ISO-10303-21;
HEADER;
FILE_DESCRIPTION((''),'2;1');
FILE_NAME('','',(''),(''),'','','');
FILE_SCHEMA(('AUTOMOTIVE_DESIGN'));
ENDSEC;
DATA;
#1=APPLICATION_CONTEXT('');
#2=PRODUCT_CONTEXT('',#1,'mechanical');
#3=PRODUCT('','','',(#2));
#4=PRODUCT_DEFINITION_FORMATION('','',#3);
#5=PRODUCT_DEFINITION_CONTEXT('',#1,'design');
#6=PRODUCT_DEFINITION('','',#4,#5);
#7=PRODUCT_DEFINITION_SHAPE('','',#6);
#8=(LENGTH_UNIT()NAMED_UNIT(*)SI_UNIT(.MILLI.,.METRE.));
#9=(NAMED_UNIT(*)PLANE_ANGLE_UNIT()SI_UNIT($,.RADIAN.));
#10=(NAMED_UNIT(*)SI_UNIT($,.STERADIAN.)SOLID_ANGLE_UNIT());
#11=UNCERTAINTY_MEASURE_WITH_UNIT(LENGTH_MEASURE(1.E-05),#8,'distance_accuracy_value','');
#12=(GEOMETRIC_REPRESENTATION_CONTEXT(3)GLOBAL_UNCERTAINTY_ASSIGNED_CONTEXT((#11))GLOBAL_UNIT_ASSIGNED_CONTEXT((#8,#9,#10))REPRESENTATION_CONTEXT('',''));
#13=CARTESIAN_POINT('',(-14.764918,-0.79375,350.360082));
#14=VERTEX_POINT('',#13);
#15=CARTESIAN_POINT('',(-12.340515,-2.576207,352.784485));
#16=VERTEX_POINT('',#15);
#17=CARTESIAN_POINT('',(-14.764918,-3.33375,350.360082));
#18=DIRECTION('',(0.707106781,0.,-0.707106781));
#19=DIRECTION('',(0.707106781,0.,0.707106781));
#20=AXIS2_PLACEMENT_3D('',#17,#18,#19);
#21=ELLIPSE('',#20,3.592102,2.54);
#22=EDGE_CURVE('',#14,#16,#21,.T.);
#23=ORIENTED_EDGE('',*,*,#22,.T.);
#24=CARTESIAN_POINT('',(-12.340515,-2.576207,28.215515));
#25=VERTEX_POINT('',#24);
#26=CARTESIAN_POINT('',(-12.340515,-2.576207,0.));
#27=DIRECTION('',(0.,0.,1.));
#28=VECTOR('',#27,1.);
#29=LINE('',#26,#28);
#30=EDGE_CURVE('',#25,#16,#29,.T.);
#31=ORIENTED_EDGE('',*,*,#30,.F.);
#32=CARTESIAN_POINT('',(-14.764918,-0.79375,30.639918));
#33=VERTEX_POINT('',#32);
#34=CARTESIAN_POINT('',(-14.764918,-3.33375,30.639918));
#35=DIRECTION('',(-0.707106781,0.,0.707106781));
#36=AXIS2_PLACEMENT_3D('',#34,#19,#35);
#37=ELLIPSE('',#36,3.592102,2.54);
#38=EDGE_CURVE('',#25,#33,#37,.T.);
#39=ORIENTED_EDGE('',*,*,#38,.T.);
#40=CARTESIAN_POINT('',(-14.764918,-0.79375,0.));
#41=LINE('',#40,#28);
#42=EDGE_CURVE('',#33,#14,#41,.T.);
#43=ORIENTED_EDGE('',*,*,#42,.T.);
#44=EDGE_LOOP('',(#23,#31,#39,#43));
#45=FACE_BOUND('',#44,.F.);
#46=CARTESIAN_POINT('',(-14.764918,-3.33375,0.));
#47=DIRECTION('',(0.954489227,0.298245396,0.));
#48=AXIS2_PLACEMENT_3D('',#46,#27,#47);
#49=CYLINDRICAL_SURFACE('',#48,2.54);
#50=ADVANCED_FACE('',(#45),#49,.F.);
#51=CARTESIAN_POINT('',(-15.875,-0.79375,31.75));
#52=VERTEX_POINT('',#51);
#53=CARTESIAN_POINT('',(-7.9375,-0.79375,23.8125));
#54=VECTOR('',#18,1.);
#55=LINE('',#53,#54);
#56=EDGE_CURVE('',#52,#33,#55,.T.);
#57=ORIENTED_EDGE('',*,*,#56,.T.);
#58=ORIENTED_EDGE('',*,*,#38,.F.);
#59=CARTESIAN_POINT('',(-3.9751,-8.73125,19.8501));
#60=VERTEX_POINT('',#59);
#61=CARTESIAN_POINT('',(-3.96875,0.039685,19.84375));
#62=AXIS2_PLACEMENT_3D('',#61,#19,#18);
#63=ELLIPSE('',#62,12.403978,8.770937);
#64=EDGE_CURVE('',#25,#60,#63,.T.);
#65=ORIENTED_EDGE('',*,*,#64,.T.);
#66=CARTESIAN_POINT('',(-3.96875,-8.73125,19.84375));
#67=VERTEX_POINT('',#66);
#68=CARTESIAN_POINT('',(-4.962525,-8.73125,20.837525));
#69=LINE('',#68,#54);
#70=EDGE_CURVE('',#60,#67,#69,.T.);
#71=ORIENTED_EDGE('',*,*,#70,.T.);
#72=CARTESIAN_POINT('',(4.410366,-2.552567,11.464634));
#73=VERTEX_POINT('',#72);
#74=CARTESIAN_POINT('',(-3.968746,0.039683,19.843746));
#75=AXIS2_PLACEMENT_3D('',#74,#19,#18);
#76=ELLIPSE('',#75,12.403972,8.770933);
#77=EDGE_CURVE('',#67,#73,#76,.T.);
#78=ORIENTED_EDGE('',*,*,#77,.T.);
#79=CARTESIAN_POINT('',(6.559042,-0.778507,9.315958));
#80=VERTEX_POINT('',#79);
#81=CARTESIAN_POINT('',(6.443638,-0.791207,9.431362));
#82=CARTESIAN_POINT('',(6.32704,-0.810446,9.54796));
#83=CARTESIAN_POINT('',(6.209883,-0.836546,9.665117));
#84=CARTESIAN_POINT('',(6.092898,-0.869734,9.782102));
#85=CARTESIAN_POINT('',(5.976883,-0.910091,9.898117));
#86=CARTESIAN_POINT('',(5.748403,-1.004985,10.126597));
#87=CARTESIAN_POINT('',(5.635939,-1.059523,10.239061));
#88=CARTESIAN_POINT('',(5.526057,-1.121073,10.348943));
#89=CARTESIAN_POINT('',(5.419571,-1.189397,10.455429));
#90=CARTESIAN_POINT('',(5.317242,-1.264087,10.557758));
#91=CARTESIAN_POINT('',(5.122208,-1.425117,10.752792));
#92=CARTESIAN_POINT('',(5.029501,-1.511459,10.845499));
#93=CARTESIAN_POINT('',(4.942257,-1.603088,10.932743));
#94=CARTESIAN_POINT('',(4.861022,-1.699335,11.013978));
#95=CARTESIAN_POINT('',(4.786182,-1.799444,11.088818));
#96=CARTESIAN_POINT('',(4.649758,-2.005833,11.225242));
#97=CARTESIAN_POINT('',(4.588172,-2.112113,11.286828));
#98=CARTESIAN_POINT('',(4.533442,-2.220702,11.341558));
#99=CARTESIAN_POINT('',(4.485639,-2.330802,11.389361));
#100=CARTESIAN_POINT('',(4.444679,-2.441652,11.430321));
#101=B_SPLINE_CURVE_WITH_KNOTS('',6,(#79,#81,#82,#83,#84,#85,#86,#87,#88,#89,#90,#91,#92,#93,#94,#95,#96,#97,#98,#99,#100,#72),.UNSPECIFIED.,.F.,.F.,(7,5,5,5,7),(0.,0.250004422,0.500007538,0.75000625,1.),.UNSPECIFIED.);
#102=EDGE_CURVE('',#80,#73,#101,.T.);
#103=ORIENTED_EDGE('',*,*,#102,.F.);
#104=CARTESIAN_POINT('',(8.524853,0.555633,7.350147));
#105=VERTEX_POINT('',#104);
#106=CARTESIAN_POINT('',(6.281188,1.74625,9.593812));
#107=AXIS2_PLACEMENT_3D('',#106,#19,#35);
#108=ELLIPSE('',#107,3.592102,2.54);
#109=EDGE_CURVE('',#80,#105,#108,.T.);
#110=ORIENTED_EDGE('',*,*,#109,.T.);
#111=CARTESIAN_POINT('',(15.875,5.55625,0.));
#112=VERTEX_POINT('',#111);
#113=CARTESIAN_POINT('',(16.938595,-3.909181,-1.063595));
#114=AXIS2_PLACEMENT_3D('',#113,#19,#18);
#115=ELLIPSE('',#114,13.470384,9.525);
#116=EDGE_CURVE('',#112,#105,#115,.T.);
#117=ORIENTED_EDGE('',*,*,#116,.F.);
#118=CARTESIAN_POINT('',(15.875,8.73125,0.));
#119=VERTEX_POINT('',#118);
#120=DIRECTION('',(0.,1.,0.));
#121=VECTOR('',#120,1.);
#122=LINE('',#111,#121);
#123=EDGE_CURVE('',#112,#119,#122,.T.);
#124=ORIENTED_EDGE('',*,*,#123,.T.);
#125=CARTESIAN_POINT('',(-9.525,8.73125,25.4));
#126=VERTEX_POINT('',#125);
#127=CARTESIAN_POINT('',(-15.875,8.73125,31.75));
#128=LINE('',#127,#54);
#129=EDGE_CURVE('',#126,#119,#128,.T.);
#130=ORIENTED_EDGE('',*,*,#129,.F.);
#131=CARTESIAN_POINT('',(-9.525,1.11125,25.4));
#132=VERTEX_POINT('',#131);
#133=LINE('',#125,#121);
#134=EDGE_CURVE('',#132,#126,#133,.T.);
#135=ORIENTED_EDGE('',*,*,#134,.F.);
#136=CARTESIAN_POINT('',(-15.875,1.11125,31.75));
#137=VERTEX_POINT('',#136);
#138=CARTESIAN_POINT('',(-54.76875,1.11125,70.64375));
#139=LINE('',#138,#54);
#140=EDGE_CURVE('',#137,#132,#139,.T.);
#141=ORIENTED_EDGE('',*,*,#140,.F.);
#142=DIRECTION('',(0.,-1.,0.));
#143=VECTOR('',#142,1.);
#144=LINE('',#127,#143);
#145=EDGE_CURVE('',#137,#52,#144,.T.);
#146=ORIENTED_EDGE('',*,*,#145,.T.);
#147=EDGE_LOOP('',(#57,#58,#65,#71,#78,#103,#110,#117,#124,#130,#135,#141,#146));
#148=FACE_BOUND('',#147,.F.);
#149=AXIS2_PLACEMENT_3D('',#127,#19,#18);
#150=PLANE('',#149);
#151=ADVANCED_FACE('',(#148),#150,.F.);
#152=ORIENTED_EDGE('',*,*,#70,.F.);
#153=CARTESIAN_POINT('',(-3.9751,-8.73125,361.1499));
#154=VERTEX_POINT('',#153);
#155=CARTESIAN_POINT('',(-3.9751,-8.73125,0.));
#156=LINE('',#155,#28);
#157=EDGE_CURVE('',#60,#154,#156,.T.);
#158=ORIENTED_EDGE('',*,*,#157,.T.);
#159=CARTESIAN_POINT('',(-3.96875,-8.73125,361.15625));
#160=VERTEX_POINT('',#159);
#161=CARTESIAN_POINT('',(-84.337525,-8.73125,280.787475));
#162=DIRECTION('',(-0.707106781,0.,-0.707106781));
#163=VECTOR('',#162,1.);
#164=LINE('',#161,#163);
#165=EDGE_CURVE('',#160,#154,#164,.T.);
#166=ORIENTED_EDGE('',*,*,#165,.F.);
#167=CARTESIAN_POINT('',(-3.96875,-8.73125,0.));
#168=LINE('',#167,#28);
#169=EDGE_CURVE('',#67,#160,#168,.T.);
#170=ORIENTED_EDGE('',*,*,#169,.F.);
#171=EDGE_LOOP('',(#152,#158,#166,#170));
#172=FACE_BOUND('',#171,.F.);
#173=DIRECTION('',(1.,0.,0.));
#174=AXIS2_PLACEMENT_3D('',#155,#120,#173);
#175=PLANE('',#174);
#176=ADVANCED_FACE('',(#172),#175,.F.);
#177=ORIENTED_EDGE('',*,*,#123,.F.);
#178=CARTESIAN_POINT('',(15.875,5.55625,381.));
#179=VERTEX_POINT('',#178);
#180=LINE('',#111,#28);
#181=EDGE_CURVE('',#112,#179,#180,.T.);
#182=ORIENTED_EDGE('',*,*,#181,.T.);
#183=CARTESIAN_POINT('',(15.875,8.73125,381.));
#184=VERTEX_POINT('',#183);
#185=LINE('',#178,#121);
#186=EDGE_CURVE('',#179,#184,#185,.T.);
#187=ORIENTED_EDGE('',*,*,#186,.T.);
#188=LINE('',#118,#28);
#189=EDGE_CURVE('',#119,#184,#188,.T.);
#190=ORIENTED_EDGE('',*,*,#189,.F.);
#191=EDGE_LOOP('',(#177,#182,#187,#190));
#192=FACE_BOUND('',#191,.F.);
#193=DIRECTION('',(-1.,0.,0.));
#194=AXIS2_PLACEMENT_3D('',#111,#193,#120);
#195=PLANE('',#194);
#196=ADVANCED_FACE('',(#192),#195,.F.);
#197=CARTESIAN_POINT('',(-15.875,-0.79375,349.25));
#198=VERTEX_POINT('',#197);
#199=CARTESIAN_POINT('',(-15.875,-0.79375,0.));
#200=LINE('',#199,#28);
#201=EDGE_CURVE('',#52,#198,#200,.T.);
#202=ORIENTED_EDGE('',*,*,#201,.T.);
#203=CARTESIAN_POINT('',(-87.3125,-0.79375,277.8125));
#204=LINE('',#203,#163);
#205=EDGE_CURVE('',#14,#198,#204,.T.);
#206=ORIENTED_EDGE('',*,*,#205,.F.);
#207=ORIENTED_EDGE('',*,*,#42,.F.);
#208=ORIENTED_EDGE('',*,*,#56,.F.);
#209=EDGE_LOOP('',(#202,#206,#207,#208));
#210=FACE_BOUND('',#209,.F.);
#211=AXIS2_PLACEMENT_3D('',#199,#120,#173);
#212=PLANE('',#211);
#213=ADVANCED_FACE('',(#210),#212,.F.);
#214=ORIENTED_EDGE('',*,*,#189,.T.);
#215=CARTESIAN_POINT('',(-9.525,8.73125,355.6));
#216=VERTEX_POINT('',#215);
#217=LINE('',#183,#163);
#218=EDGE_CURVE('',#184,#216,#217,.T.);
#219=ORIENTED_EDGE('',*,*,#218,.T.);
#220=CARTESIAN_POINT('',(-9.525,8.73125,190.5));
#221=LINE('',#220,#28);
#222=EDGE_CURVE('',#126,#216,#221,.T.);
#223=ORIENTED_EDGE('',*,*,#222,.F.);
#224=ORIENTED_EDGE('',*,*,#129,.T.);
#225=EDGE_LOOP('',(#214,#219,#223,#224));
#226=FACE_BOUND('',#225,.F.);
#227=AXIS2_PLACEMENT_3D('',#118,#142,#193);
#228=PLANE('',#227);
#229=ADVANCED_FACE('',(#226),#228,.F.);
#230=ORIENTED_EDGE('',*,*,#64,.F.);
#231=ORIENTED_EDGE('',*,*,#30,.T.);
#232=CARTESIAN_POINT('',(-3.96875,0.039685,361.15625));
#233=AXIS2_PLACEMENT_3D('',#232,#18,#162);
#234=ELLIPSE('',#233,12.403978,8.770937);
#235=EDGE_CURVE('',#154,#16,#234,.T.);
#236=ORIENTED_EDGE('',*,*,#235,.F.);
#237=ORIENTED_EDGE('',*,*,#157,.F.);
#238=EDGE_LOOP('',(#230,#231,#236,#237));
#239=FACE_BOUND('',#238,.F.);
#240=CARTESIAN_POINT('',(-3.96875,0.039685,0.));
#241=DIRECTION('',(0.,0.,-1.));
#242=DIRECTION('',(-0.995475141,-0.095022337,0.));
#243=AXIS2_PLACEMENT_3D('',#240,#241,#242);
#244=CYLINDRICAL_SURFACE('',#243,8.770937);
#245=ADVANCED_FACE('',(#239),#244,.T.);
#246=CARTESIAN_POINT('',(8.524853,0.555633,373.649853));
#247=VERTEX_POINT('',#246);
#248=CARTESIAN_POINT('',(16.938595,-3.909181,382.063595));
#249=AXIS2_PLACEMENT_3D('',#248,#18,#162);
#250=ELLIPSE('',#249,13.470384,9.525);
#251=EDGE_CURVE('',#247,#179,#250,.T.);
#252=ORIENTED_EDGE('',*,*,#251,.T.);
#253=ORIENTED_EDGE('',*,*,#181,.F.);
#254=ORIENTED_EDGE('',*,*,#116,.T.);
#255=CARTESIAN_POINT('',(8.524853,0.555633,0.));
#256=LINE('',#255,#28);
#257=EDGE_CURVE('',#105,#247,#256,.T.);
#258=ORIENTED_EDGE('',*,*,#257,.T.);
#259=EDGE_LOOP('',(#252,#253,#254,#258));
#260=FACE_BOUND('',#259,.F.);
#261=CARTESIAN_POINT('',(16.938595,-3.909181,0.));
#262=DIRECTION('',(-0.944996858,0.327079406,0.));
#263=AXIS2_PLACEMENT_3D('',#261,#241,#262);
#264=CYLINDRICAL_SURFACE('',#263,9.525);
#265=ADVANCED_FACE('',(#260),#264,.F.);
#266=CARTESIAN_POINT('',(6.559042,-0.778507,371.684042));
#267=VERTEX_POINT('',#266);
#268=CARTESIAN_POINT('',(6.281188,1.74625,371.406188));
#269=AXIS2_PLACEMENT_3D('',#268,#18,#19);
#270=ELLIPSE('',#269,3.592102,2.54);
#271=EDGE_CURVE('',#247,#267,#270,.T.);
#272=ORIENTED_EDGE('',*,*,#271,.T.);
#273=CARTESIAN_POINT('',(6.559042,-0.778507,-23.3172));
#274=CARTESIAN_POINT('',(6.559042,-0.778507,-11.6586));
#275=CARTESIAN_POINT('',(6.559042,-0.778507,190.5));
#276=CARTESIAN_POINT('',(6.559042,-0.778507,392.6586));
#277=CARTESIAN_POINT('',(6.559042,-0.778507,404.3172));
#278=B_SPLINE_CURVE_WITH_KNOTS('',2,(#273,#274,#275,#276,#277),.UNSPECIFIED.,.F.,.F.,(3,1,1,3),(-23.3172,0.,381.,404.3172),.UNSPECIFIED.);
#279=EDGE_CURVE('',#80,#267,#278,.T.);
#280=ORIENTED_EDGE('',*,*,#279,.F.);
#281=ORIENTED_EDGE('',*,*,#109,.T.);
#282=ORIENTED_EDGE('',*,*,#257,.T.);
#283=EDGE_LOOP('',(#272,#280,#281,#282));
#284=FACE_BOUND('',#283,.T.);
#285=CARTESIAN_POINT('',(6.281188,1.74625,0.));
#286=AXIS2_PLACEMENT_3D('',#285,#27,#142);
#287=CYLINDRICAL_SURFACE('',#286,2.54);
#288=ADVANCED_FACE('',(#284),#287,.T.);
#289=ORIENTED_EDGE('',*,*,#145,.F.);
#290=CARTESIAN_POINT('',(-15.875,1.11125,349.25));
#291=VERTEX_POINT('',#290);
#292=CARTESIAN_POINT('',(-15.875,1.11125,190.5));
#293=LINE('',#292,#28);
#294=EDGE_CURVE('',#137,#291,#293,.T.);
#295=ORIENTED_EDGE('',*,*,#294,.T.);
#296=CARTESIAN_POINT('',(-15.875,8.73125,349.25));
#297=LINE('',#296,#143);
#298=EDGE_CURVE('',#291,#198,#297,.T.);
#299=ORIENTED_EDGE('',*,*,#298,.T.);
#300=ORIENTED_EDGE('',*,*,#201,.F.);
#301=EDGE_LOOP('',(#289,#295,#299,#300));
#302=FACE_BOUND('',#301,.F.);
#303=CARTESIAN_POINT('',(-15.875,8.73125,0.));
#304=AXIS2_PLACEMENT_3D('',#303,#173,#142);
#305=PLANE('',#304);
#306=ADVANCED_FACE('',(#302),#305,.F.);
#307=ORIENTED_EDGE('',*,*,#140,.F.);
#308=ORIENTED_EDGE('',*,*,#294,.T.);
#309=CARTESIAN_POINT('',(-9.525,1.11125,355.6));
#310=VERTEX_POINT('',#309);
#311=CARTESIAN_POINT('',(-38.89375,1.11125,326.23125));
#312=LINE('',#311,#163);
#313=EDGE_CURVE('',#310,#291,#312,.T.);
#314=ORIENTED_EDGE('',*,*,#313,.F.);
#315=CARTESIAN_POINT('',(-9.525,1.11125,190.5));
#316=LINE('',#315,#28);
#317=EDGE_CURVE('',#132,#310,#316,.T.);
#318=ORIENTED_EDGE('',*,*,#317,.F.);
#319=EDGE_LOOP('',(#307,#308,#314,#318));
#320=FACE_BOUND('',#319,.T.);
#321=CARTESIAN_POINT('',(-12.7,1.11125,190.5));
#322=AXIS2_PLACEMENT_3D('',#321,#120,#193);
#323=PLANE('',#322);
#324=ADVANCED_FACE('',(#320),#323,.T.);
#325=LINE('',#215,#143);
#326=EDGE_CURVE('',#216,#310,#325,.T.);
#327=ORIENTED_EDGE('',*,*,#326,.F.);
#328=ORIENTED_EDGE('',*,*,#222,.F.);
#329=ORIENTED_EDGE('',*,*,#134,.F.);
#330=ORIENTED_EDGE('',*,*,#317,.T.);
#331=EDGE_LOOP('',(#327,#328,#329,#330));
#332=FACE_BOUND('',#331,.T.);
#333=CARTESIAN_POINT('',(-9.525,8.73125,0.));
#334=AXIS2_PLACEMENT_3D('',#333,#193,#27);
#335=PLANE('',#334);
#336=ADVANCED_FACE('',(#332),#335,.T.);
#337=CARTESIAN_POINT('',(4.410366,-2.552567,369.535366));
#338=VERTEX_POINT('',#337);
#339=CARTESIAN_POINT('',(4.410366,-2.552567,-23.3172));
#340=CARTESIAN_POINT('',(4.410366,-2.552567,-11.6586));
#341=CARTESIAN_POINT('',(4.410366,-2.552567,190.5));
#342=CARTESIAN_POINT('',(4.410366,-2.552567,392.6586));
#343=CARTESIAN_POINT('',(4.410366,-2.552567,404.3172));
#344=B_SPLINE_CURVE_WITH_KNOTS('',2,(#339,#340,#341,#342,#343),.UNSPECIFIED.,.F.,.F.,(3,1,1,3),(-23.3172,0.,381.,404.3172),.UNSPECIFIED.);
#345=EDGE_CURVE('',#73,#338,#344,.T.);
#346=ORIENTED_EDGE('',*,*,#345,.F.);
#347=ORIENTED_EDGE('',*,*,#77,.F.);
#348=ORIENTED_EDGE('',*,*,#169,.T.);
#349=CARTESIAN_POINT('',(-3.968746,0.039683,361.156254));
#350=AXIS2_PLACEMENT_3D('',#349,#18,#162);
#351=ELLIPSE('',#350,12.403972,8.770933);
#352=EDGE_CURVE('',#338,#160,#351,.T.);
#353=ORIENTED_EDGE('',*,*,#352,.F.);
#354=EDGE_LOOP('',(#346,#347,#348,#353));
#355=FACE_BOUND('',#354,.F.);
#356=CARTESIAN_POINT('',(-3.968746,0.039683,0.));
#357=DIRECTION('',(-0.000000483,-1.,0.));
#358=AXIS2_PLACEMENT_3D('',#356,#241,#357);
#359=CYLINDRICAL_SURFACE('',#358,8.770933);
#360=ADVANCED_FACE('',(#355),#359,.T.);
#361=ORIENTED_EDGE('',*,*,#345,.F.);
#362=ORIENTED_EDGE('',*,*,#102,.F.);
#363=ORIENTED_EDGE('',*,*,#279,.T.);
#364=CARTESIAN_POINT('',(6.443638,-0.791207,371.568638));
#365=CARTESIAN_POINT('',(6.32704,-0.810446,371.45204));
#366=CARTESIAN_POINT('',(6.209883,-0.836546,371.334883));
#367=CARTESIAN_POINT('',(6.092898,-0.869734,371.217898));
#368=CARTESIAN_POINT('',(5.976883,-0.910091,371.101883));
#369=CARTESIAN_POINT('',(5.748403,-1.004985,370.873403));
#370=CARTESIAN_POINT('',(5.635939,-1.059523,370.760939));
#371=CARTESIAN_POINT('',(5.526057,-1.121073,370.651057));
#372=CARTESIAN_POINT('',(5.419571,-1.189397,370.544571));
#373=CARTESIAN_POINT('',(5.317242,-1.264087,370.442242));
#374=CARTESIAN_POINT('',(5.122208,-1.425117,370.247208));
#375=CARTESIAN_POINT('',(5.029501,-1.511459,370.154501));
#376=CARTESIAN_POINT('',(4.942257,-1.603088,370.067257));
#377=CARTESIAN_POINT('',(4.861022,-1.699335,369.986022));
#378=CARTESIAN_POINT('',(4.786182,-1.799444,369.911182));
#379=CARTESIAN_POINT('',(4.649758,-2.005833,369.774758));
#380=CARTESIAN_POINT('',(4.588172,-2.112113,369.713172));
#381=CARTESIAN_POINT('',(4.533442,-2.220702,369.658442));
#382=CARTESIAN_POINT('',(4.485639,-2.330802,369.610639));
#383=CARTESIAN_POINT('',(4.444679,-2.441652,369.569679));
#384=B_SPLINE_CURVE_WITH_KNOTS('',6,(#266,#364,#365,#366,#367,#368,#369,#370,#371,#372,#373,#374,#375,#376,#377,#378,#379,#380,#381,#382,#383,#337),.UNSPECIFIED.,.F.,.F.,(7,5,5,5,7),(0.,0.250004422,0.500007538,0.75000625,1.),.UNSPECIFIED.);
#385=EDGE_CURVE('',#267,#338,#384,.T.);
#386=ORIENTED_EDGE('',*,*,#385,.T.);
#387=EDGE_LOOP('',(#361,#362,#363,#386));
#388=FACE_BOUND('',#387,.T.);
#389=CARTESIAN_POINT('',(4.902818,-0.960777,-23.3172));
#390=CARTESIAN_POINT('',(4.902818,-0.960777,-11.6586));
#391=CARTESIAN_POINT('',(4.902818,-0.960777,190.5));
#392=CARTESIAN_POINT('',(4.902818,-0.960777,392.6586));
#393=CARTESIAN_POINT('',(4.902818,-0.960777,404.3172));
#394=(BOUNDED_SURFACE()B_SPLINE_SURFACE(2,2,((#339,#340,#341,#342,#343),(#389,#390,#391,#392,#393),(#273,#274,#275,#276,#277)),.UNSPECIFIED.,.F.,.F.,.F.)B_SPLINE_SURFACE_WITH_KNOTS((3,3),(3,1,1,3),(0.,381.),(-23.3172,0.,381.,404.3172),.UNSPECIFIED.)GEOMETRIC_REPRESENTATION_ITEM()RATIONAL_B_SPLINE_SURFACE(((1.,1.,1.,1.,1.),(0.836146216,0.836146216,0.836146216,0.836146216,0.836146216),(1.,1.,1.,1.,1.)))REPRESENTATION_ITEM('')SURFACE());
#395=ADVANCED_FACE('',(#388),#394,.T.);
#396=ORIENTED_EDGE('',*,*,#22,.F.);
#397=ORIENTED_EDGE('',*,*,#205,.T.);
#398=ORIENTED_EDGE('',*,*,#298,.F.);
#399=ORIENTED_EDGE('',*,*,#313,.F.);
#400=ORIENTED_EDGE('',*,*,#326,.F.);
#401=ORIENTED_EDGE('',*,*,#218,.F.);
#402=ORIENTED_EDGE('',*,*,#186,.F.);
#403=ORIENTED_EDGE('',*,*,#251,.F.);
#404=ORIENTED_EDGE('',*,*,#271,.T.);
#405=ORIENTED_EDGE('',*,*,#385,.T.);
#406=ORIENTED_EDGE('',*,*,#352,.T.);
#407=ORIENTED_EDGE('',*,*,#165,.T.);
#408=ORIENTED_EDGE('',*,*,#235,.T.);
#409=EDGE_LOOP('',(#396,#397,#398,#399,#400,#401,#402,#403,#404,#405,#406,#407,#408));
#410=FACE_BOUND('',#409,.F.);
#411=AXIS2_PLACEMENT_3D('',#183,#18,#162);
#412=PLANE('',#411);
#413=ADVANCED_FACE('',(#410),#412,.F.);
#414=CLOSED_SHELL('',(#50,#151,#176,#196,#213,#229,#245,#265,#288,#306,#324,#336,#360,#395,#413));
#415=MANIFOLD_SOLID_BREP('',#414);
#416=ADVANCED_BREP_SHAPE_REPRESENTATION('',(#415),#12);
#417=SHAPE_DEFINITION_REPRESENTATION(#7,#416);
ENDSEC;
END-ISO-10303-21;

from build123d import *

# Parameters (mm, degrees)
F1_DEPTH = 381
F2_R     = 2.54
F3_R     = 2.54
F4_R     = 2.54
F5_W     = 6.35
F5_H     = 381
F6_DEPTH = 7.62
F8_DEPTH = 17.4635001


# Not quite as in the source:
# - ends of sketch curves that miss each other by under 0.0002 mm in the source are joined


with BuildPart() as f1:
    # F0 (on Top) → F1 (new body)
    with BuildSketch(Plane.XY):
        with BuildLine():
            Line((15.875, 5.55625), (15.875, 8.73125))
            Line((15.875, 8.73125), (-15.875, 8.73125))
            Line((-15.875, 8.73125), (-15.875, -0.79375))
            Line((-15.875, -0.79375), (-12.7, -0.79375))
            ThreePointArc((-12.7, -0.79375), (-9.8710707302, -6.4481459867), (-3.9751, -8.73125))
            Line((-3.9751, -8.73125), (-3.96875, -8.73125))
            ThreePointArc((-3.96875, -8.73125), (1.9312218072, -6.4502821485), (4.7625, -0.79375))
            Line((4.7625, -0.79375), (7.9375, -0.79375))
            ThreePointArc((7.9375, -0.79375), (10.9883747468, 3.5285940665), (15.875, 5.55625))
        make_face()
    extrude(amount=F1_DEPTH)

    # F2
    f2_edges = [f1.edges().sort_by_distance(p)[0] for p in [
        (7.9375, -0.79375, 190.5),
    ]]
    fillet(f2_edges, radius=F2_R)

    # F3
    f3_edges = [f1.edges().sort_by_distance(p)[0] for p in [
        (-12.7, -0.79375, 190.5),
    ]]
    fillet(f3_edges, radius=F3_R)

    # F4
    f4_edges = [f1.edges().sort_by_distance(p)[0] for p in [
        (4.7625, -0.79375, 190.5),
    ]]
    fillet(f4_edges, radius=F4_R)

    # F5 (on face) → F6 (cut)
    with BuildSketch(Plane(origin=(0, 8.73125, 0), x_dir=(-1, 0, 0), z_dir=(0, 1, 0))):
        with Locations((12.7, 190.5)):
            Rectangle(F5_W, F5_H)
    extrude(amount=-F6_DEPTH, mode=Mode.SUBTRACT)

    # F7 (on face) → F8 (cut, through all)
    with BuildSketch(Plane(origin=(0, 8.73125, 0), x_dir=(-1, 0, 0), z_dir=(0, 1, 0))):
        Polygon((15.875, 0), (15.875, 31.75), (-15.875, 0), align=None)
        Polygon((15.875, 381), (-15.875, 381), (15.875, 349.25), align=None)
    extrude(amount=-F8_DEPTH, mode=Mode.SUBTRACT)


solid = f1.part
